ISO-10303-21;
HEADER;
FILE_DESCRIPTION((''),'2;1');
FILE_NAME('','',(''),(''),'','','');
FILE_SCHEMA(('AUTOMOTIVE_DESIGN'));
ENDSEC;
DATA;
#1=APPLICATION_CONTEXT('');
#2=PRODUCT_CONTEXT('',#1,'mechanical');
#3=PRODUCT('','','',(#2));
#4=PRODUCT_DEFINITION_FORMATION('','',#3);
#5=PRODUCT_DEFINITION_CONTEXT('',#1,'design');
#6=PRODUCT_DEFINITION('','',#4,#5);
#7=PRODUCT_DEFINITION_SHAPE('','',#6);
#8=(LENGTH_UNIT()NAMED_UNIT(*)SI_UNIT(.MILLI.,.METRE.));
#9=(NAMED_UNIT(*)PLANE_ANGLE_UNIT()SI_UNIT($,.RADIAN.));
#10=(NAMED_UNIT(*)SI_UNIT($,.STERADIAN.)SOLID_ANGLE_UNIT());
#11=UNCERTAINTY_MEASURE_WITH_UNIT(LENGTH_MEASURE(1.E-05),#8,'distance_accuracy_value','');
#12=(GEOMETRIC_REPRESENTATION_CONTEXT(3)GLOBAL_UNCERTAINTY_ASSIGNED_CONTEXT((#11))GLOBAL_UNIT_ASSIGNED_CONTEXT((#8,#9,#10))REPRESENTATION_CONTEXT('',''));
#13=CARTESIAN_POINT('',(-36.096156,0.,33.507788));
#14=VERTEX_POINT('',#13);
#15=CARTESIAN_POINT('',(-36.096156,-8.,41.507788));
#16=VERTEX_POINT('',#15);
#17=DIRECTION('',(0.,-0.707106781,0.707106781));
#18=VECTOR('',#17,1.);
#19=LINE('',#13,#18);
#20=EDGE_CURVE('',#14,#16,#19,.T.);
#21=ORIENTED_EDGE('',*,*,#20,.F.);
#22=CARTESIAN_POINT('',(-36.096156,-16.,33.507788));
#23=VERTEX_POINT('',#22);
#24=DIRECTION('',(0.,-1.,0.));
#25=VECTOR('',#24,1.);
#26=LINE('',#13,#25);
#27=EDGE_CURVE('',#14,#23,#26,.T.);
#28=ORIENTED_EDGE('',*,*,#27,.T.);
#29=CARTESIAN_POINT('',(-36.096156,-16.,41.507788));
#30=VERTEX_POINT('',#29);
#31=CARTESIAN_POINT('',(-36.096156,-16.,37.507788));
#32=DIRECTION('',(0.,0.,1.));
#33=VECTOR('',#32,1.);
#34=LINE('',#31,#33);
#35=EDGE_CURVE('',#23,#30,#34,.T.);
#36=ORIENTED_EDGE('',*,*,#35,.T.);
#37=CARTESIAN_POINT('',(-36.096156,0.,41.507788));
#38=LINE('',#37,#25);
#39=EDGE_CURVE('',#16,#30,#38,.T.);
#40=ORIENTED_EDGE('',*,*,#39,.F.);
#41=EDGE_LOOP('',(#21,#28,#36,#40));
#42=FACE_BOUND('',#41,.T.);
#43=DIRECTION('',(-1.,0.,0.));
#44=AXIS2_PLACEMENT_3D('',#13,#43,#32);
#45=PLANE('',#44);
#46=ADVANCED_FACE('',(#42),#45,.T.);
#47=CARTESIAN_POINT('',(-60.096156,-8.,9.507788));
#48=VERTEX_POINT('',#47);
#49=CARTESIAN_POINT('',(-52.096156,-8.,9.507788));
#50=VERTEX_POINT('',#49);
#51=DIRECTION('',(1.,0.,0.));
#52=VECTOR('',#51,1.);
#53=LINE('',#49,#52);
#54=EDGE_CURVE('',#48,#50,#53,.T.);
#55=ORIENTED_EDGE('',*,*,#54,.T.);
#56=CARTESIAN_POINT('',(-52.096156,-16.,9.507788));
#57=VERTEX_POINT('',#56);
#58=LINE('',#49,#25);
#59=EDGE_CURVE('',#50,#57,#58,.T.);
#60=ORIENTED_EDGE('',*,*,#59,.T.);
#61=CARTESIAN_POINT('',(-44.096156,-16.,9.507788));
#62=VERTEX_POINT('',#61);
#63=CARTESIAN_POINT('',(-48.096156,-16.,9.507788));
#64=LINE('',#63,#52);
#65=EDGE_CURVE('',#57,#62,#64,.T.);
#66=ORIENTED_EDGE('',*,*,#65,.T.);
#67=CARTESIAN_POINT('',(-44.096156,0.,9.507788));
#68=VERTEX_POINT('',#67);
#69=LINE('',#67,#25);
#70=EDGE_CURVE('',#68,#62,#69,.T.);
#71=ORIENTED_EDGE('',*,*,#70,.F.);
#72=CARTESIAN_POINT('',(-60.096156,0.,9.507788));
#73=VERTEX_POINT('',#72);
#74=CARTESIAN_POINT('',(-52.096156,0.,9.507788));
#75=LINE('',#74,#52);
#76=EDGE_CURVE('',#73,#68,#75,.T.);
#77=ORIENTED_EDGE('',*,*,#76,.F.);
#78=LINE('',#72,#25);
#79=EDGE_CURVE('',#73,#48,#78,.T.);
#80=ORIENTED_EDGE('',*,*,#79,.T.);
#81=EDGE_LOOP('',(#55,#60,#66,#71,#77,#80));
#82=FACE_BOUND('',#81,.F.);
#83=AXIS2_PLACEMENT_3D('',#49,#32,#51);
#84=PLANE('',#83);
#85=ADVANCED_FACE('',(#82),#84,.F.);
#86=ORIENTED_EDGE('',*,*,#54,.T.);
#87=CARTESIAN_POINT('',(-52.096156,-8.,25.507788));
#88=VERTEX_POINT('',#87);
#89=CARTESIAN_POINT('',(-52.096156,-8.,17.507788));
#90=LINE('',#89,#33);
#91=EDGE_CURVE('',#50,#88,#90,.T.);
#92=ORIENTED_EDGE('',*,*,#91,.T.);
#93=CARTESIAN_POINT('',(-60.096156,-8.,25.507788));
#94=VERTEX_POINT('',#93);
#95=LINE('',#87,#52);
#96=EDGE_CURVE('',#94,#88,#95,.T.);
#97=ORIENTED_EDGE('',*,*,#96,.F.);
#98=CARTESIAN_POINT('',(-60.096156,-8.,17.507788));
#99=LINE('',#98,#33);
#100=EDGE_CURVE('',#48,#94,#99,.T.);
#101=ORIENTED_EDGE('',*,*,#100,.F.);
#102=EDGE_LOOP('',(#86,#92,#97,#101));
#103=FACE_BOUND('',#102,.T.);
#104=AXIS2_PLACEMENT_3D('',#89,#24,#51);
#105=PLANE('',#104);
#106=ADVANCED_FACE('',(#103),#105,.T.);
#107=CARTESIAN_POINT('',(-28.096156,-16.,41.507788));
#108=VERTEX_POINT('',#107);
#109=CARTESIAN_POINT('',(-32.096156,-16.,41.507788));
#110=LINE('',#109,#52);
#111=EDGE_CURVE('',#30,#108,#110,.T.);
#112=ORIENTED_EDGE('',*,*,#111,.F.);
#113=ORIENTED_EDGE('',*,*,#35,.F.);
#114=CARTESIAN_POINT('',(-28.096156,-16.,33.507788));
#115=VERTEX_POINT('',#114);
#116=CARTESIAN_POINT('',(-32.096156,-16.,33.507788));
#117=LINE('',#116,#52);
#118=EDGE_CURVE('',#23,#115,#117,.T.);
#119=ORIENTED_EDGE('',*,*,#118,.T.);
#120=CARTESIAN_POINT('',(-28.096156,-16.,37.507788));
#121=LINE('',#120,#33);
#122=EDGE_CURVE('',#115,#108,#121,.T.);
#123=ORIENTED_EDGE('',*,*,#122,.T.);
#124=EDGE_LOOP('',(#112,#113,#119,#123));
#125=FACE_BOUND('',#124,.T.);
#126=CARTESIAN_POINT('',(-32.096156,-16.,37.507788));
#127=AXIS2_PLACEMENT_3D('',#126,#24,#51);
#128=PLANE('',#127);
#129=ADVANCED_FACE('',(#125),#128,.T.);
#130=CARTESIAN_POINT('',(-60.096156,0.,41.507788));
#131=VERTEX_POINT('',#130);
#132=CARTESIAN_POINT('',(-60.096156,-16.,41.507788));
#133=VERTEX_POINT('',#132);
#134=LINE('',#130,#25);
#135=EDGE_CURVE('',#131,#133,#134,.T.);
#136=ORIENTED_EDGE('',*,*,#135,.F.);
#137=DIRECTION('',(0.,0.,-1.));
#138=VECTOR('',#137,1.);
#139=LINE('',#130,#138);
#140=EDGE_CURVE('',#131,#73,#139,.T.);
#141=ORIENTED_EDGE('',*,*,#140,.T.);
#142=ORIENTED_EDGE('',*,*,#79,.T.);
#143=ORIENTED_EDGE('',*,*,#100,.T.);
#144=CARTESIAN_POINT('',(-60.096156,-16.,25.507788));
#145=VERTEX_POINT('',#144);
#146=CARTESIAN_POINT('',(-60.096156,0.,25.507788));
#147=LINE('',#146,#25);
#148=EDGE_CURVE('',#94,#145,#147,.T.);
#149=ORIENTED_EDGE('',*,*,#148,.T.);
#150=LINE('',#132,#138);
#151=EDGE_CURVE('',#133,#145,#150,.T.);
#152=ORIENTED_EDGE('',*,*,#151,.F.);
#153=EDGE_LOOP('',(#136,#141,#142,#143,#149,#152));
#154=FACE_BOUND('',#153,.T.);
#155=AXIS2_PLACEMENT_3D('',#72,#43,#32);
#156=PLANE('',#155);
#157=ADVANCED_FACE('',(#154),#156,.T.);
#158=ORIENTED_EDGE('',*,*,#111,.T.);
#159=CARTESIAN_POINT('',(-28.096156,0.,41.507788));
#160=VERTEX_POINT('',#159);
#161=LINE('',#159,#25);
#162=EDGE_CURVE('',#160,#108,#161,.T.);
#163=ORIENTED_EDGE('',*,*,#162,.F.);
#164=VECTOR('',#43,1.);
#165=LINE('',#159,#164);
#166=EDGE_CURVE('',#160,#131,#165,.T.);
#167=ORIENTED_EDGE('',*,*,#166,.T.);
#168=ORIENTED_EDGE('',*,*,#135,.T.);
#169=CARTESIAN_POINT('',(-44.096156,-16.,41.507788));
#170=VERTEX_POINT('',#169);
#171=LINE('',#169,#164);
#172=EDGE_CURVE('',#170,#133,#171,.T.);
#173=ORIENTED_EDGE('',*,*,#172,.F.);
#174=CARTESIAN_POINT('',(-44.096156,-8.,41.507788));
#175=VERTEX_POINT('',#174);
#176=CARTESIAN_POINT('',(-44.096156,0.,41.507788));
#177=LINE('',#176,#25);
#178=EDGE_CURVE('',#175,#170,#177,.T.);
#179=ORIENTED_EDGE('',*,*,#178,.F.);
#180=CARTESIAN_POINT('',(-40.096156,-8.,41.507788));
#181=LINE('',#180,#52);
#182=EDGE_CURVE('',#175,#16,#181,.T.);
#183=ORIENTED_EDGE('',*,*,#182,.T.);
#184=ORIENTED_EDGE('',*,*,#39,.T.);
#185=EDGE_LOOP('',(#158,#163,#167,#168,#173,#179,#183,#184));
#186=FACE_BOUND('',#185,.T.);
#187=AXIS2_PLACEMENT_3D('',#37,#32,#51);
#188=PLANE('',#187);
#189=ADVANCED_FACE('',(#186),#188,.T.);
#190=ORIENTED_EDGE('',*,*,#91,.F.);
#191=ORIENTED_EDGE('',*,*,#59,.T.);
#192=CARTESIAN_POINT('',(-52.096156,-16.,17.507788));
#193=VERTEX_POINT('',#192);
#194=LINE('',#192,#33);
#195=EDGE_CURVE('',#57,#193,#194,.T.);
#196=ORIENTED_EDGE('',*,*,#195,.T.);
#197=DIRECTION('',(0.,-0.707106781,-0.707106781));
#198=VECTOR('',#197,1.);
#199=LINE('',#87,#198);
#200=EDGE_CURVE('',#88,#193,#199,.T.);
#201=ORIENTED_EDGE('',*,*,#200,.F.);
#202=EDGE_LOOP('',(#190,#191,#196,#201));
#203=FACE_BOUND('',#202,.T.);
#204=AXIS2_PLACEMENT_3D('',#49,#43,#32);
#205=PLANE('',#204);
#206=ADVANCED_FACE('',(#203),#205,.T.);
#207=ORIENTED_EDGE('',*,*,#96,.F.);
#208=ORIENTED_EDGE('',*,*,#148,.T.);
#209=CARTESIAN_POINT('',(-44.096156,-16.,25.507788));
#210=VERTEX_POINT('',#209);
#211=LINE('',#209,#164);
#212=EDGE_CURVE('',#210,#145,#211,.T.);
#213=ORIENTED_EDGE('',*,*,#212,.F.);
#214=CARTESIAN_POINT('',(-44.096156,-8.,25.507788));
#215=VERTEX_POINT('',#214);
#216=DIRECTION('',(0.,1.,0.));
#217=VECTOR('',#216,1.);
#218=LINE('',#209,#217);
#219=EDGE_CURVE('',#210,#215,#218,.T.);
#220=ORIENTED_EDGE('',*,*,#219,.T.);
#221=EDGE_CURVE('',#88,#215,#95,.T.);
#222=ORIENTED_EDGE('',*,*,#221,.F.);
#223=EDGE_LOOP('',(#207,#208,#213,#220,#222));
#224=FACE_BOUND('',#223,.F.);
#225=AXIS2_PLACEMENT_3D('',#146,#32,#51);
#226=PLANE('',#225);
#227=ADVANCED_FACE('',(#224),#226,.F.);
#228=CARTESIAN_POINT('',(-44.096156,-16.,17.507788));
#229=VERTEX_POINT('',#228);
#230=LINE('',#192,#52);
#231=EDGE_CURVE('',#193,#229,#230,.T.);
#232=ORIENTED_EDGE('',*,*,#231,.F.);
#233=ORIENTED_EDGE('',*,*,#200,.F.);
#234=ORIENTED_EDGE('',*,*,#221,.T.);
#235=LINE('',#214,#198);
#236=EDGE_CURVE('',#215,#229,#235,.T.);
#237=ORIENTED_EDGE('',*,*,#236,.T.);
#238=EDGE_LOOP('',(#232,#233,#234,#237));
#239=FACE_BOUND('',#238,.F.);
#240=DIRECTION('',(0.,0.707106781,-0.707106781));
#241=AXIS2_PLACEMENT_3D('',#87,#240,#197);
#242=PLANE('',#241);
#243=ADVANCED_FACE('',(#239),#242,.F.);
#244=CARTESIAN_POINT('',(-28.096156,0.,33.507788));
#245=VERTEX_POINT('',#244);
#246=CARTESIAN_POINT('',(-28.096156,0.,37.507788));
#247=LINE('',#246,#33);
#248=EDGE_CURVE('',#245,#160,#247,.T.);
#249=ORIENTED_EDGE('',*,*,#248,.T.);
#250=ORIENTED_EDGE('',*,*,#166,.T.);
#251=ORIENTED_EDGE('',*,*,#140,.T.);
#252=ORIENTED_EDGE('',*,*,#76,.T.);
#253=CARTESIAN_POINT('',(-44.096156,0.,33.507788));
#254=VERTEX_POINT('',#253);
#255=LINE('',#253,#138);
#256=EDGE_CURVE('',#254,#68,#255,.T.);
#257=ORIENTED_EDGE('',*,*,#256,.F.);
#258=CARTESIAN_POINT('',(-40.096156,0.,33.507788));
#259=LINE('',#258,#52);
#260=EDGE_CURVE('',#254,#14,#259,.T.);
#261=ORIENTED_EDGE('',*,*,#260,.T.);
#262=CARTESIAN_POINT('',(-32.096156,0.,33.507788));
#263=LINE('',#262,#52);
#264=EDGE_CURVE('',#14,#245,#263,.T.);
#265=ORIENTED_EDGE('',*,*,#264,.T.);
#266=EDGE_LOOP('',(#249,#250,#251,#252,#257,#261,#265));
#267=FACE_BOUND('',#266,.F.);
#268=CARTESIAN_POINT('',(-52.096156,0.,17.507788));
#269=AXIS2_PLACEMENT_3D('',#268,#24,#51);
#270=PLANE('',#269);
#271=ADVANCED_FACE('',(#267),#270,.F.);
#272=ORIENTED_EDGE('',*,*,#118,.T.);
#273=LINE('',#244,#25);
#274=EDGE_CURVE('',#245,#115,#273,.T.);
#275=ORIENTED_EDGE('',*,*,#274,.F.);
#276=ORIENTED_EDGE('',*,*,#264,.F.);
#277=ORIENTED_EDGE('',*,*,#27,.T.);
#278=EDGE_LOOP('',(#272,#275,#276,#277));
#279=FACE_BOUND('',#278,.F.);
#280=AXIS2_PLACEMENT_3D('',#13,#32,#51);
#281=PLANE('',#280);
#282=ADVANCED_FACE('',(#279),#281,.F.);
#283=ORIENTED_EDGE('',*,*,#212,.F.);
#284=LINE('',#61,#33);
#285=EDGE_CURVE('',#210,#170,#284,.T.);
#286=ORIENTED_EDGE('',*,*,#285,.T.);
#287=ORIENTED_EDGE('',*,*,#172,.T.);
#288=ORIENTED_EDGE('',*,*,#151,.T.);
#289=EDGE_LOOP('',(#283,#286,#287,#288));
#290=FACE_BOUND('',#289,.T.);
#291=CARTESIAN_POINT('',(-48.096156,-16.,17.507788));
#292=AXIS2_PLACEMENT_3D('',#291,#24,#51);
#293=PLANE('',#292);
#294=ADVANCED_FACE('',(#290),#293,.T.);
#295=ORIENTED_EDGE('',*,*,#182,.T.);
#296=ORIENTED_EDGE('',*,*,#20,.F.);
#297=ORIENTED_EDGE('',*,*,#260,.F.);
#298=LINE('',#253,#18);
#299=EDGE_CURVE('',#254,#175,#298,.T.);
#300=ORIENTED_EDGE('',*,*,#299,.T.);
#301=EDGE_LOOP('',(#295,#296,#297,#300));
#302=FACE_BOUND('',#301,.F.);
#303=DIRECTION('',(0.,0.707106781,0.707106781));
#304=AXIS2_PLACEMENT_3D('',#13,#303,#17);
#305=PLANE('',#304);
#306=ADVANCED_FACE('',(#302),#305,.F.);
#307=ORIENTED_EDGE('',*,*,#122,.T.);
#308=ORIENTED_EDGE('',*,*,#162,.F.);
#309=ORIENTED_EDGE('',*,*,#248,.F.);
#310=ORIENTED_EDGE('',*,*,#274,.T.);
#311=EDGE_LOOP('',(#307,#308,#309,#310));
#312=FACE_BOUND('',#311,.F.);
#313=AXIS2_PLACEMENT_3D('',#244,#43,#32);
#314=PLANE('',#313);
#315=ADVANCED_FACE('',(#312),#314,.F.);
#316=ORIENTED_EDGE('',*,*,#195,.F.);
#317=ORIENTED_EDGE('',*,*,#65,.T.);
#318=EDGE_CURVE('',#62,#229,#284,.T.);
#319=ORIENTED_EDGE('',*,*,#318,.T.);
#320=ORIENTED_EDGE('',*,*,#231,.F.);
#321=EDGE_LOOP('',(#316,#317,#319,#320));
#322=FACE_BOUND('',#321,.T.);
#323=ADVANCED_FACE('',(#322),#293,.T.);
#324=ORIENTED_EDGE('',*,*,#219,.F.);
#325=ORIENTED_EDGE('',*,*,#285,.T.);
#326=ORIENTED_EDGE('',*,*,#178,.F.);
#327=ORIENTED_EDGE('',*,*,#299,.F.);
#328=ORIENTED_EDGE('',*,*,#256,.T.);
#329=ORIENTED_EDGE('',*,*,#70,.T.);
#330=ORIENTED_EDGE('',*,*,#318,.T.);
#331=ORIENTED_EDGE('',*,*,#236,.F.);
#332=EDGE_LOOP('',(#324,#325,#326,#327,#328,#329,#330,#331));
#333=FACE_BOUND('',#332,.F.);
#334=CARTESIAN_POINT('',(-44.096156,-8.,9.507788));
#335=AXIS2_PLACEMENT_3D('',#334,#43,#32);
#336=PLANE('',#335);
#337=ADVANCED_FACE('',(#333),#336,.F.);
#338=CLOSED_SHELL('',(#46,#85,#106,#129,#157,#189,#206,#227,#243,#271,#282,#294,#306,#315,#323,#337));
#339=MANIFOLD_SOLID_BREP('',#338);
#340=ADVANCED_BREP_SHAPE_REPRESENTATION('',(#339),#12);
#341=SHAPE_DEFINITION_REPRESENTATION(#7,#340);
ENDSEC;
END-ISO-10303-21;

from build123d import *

# Parameters (mm, degrees)
F0_W      = 8
F0_H      = 8
F1_DEPTH  = 8
F2_DEPTH  = 16
F4_DEPTH  = 8
F5_DEPTH  = 16
F0_W_2    = 16
F0_H_2    = 16
F6_DEPTH  = 8
F7_W      = 8
F7_H      = 16
F8_DEPTH  = 8
F10_DEPTH = 8


with BuildPart() as f1:
    # F0 (on Front) → F1 (new body)
    with BuildSketch(Plane.XZ):
        with Locations((-40.0961564034, 37.5077876064)):
            Rectangle(F0_W, F0_H)
    extrude(amount=F1_DEPTH)

    # F0 (on Front) → F2 (join)
    with BuildSketch(Plane.XZ):
        Polygon((-44.0961564034, 41.5077876064), (-60.0961564034, 41.5077876064), (-60.0961564034, 25.5077876064), (-44.0961564034, 25.5077876064), (-44.0961564034, 33.5077876064), align=None)
    extrude(amount=F2_DEPTH)

    # F3 (on face) → F4 (cut)
    with BuildSketch(Plane.YZ.offset(-36.0961564034)):
        Polygon((0, 33.5077876064), (-8, 41.5077876064), (-8, 33.5077876064), align=None)
    extrude(amount=-F4_DEPTH, mode=Mode.SUBTRACT)

    # F0 (on Front) → F5 (join)
    with BuildSketch(Plane.XZ):
        with Locations((-32.0961564034, 37.5077876064)):
            Rectangle(F0_W, F0_H)
    extrude(amount=F5_DEPTH)

    # F0 (on Front) → F6 (join)
    with BuildSketch(Plane.XZ):
        with Locations((-52.0961564034, 17.5077876064)):
            Rectangle(F0_W_2, F0_H_2)
    extrude(amount=F6_DEPTH)

    # F7 (on face) → F8 (join)
    with BuildSketch(Plane.XZ.offset(8)):
        with Locations((-48.0961564034, 17.5077876064)):
            Rectangle(F7_W, F7_H)
    extrude(amount=F8_DEPTH)

    # F9 (on face) → F10 (cut)
    with BuildSketch(Plane(origin=(-52.0961564034, 0, 0), x_dir=(0, -1, 0), z_dir=(-1, 0, 0))):
        Polygon((8, 25.5077876064), (16, 17.5077876064), (16, 25.5077876064), align=None)
    extrude(amount=-F10_DEPTH, mode=Mode.SUBTRACT)


solid = f1.part
